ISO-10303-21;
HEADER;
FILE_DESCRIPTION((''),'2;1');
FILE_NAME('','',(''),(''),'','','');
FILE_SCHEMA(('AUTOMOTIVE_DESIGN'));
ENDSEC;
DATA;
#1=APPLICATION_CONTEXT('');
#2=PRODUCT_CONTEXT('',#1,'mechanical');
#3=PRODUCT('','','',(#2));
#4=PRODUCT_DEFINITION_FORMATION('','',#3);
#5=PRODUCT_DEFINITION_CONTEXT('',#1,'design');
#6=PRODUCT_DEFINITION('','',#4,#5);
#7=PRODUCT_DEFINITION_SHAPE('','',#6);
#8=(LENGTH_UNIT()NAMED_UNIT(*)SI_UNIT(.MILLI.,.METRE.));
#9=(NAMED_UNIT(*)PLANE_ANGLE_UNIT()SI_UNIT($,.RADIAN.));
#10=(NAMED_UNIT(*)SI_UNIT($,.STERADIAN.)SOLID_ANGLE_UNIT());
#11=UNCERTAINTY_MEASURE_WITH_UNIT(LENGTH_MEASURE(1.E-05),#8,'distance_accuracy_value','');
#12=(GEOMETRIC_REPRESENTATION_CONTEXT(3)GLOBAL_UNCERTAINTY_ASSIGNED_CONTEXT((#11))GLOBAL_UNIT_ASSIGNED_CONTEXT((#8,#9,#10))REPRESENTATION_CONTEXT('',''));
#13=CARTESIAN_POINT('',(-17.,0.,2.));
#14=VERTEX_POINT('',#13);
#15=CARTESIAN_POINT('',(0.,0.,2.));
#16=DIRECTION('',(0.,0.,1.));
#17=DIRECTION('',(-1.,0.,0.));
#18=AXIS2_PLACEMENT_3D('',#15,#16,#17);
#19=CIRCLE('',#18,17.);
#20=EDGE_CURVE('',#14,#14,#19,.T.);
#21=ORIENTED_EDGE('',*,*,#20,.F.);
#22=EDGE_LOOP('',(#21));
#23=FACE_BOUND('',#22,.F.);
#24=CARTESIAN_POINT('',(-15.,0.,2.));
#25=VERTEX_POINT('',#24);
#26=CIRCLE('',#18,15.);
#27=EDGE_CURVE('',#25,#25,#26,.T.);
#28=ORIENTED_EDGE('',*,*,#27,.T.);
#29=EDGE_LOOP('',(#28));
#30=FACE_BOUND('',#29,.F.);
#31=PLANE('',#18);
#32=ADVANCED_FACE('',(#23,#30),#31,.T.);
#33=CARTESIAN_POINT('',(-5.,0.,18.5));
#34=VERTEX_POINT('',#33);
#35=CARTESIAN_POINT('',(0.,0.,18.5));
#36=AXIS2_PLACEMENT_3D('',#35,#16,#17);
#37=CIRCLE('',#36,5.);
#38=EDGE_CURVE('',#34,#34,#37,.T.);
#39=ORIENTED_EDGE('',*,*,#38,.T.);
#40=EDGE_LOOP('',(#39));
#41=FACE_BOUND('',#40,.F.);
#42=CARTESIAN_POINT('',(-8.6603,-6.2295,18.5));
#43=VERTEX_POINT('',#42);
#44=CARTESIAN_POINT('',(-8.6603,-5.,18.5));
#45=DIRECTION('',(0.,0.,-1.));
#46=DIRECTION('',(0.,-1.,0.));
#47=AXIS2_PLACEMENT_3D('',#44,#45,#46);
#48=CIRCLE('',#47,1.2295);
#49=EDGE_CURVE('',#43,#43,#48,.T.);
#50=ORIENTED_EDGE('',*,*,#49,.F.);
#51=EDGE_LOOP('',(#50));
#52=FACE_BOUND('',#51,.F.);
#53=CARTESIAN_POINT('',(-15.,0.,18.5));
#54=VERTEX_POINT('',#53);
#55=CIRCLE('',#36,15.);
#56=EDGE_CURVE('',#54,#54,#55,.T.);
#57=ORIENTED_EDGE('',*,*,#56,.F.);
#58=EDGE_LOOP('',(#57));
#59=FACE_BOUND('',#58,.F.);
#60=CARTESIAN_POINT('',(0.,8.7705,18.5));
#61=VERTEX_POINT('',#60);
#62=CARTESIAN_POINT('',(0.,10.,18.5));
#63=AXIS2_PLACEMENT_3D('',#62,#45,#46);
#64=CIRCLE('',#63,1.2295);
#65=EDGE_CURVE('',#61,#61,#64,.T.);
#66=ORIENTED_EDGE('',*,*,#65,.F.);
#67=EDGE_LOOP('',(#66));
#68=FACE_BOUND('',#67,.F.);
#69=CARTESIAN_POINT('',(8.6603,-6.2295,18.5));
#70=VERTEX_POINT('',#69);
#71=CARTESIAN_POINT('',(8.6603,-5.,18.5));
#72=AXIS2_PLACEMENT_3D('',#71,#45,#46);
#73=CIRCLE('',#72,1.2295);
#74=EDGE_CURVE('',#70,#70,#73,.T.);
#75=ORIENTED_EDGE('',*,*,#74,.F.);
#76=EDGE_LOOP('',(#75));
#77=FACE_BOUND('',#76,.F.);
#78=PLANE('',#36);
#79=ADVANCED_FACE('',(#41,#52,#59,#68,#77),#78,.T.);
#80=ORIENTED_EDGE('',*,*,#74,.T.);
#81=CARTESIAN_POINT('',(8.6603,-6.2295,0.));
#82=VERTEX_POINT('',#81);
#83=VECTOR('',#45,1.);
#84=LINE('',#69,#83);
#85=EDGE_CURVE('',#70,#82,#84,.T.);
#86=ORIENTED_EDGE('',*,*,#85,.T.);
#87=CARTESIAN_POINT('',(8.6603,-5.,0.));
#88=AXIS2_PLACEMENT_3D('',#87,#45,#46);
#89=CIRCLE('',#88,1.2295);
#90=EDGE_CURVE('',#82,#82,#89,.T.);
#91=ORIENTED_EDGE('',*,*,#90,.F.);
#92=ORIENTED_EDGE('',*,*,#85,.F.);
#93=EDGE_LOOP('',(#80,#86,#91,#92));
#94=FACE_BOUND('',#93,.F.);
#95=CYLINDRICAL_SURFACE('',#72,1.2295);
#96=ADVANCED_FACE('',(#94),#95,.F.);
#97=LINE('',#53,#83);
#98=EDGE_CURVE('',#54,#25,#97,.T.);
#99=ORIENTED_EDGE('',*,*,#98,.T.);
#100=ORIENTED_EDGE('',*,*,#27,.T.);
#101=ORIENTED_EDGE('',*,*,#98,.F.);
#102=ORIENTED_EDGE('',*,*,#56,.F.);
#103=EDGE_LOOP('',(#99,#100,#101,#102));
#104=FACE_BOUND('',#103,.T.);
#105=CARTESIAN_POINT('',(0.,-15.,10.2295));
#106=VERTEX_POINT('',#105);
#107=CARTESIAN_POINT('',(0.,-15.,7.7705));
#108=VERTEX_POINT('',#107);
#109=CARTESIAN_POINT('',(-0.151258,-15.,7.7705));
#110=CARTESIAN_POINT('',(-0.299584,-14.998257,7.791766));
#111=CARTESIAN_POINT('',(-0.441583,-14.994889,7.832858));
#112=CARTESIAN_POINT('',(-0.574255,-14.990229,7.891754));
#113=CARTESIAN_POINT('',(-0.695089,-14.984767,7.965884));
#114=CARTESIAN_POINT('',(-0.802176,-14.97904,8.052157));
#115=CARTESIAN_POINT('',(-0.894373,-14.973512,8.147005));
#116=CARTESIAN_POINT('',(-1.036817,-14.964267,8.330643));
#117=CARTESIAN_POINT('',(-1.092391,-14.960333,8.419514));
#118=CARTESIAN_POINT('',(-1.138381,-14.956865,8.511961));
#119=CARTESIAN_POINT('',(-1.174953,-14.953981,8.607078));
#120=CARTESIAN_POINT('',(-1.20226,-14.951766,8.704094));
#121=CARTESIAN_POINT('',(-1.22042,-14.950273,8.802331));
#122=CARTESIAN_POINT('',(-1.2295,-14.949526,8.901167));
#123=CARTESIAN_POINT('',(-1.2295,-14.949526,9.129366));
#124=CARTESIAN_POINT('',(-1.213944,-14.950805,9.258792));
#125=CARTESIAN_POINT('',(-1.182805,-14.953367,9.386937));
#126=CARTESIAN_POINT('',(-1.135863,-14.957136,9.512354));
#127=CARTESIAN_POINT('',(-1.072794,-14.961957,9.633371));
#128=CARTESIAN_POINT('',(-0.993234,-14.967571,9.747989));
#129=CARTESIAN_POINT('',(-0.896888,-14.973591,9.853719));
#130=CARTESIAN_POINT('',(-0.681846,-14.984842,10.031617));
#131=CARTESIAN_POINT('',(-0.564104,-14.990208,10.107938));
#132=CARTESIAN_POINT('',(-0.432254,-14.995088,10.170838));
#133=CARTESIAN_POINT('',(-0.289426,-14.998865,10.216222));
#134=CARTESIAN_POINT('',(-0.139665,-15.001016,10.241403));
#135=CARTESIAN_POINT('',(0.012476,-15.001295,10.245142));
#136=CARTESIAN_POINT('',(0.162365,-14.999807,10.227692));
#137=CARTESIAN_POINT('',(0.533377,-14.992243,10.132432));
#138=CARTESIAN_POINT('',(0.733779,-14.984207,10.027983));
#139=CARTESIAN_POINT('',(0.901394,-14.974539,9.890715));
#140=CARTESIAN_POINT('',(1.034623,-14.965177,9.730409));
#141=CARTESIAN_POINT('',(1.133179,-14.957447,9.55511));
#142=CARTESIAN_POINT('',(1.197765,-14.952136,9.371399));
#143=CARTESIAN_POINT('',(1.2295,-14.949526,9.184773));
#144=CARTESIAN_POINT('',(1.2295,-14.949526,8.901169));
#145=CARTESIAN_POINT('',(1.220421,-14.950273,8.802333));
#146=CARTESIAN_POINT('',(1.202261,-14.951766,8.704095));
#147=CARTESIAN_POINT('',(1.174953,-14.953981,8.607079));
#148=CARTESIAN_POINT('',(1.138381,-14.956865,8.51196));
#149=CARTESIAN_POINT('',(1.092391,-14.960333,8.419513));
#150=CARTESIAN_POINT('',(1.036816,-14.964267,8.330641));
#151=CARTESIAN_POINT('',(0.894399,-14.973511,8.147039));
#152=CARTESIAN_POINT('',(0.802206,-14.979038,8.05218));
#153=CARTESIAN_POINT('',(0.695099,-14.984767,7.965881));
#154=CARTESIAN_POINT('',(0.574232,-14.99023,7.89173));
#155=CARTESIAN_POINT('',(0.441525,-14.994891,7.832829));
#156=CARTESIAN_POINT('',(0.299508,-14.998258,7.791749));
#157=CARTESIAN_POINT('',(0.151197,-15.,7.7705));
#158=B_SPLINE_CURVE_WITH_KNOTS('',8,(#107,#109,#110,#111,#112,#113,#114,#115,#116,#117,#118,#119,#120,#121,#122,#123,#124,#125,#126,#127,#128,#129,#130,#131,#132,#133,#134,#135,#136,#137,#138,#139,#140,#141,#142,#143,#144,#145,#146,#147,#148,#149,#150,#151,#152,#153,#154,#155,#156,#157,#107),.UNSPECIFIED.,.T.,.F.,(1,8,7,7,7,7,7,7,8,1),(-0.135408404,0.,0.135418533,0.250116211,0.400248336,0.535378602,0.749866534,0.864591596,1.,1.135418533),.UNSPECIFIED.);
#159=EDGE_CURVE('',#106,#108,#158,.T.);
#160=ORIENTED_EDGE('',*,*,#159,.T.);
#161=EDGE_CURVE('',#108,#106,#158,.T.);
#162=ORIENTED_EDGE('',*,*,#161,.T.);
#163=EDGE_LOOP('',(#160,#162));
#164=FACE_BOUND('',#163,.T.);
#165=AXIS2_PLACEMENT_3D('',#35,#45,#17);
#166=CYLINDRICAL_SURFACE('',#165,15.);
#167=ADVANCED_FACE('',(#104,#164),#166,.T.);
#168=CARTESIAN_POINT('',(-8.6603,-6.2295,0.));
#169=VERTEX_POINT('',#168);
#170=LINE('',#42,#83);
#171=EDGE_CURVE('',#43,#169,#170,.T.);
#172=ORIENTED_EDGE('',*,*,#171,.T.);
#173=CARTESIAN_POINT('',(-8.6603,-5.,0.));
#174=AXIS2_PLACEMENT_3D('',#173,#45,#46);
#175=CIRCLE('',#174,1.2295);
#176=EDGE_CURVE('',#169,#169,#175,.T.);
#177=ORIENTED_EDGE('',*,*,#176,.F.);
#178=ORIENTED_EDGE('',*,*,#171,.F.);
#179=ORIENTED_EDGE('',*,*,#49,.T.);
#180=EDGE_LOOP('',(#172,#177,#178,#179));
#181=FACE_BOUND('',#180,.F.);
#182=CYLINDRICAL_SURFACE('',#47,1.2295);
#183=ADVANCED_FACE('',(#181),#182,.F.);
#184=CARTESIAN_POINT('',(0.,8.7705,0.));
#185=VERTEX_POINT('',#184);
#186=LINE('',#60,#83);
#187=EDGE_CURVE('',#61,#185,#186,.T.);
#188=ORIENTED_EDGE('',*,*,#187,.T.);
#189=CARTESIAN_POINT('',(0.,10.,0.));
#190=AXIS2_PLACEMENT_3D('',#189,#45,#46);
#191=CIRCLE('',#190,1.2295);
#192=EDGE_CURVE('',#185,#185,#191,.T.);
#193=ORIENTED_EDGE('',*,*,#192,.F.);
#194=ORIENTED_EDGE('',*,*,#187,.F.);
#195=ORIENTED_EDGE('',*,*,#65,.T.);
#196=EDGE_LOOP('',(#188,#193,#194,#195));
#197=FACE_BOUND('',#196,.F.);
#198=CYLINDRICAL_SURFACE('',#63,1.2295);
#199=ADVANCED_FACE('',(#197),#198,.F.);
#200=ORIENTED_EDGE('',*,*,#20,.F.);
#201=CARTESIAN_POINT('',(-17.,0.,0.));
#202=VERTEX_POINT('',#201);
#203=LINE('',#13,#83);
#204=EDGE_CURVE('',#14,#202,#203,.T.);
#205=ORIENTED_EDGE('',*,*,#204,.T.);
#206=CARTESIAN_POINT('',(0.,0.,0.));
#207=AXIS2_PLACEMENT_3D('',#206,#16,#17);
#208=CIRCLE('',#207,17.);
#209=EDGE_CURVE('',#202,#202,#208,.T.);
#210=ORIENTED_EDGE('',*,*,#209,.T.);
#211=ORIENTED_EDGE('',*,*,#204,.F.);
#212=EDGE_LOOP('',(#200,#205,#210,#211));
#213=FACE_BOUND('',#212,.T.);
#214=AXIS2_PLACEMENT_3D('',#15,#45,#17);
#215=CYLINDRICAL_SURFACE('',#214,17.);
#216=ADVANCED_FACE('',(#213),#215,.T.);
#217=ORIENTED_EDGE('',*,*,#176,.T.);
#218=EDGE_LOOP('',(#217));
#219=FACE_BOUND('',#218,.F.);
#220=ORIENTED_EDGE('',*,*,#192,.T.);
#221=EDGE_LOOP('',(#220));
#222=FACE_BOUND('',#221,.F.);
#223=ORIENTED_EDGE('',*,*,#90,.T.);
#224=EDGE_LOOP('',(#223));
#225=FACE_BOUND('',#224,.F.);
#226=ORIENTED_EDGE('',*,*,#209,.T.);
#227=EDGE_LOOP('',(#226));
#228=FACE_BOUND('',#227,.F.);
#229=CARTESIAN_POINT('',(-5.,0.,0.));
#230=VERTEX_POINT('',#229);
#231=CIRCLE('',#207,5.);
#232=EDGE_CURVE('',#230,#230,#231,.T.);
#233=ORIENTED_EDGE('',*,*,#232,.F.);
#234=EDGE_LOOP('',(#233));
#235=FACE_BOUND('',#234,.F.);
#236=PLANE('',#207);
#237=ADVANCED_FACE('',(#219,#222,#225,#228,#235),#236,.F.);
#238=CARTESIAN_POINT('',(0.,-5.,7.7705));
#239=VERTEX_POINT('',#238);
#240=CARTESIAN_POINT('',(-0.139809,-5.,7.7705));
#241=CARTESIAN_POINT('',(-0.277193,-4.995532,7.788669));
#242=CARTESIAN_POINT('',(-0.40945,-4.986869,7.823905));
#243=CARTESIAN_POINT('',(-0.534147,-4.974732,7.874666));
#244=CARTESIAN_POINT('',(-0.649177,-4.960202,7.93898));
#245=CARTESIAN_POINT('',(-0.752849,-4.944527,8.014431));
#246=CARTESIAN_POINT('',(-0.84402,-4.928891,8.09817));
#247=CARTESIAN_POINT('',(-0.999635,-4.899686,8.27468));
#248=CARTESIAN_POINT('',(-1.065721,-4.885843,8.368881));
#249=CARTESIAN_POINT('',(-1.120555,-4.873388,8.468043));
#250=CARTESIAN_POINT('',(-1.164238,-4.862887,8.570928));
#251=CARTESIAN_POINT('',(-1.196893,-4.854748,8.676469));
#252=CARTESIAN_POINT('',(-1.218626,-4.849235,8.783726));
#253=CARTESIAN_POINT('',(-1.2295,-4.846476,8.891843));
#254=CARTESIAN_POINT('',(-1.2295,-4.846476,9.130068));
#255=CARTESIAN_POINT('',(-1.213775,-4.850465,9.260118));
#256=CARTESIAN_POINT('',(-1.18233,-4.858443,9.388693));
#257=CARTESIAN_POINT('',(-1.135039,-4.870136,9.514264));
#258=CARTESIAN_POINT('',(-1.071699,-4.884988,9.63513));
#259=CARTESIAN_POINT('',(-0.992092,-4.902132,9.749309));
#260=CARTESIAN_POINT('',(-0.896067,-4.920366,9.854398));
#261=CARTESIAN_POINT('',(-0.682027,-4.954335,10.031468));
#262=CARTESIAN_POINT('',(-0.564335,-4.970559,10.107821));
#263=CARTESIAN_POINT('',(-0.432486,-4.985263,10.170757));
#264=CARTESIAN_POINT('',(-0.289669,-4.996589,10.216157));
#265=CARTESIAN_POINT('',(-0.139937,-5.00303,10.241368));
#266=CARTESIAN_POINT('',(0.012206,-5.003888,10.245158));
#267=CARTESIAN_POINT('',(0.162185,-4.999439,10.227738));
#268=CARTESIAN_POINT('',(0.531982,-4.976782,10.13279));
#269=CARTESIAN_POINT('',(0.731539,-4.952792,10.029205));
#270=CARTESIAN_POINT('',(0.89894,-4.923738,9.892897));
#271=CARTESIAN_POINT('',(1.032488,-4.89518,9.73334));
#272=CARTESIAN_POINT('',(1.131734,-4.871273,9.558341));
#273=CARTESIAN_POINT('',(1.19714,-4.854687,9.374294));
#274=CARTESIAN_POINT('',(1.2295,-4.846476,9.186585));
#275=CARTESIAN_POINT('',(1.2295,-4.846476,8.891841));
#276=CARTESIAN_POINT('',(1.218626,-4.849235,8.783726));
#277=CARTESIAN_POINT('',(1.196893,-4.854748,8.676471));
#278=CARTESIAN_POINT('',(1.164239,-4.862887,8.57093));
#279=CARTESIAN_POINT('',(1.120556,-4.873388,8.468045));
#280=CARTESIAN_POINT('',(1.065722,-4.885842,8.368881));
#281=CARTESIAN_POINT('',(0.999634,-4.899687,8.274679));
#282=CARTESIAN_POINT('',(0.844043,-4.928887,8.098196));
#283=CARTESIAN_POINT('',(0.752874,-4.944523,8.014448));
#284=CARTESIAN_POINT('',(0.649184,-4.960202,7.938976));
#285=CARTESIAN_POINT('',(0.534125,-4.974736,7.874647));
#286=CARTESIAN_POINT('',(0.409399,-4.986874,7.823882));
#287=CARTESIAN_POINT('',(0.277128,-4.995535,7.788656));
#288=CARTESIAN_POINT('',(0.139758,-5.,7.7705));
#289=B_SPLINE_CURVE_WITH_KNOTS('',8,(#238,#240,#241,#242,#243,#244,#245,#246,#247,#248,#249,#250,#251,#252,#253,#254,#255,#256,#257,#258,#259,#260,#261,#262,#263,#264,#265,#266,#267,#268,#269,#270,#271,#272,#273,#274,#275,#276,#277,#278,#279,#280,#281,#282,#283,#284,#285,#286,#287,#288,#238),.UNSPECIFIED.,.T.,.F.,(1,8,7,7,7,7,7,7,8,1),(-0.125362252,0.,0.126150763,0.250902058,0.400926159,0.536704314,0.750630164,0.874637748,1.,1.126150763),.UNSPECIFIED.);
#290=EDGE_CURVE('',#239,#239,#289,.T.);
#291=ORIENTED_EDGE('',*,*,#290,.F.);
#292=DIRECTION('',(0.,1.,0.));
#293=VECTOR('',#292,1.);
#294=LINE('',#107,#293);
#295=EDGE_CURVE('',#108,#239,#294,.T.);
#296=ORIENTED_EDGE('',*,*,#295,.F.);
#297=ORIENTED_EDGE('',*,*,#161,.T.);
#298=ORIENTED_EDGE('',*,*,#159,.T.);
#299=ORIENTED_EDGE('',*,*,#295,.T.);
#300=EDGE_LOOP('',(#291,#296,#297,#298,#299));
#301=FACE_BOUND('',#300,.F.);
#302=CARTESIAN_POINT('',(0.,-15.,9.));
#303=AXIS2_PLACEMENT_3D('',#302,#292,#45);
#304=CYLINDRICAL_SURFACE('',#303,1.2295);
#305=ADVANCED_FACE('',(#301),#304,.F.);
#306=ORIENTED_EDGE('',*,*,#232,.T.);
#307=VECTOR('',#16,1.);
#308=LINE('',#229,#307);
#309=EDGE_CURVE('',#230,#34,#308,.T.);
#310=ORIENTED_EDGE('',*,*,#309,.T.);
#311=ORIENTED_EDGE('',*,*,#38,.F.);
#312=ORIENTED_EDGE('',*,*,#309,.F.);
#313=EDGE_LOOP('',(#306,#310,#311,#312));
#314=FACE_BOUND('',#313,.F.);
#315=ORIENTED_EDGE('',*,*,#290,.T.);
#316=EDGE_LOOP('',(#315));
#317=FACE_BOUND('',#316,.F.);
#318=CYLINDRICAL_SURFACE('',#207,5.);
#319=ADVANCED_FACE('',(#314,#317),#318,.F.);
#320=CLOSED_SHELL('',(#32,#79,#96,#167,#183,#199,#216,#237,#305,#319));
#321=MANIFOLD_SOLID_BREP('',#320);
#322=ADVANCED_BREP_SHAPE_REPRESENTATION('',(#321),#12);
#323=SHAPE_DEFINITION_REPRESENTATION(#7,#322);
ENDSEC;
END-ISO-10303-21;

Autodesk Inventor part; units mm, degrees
ref_plane "YZ Plane" through (0, 0, 0) normal (1, 0, 0) x (0, 1, 0)
ref_plane "XY Plane" through (0, 0, 0) normal (0, 0, 1) x (1, 0, 0)
sketch "Sketch1" plane through (0, 0, 0) normal (0, 1, 0) x (-1, 0, 0)
  line L0 (0, 0) -> (0, 34.0434)
  line L1 (5, 0) -> (5, 18.5)
  line L2 (5, 18.5) -> (15, 18.5)
  line L3 (15, 18.5) -> (15, 2)
  line L4 (15, 2) -> (17, 2)
  line L5 (17, 2) -> (17, 0)
  line L6 (17, 0) -> (5, 0)
  dimension "d0" = 10
  dimension "d1" = 2
  dimension "d2" = 2
  dimension "d3" = 30
  dimension "d4" = 16.5
revolve "Revolution1" add sketch "Sketch1" angle 360 about axis through (0, 0, 0) along (0, 0, 1)
sketch "Sketch2" plane through (0, 0, 18.5) normal (0, 0, 1) x (1, 0, 0)
  circle A0 centre (0, 0) radius 5 projected
  circle A1 centre (0, 0) radius 15 projected
  circle A2 centre (0, 0) radius 5 projected
  line L0 (0, 5) -> (0, 15)
  point P0 (0, 10)
  point P1 (0, 10)
  point P2 (-8.6603, -5)
  point P3 (8.6603, -5)
  dimension "d8" = 360
hole "Hole1" at (0, 10, 18.5) at (-8.6603, -5, 18.5) at (8.6603, -5, 18.5) direction (0, 0, -1) diameter 2.459 end through all thread size "M3x0.5" class "6H" standard "ISO Metric profile"
ref_plane "Work Plane2" through (0, -15, 10.25) normal (0, 1, 0) x (-1, 0, 0)
sketch "Sketch3" plane through (0, -15, 10.25) normal (0, 1, 0) x (-1, 0, 0)
  line L0 (17, -10.25) -> (-17, -10.25) projected
  point P0 (0, -10.25)
  point P1 (0, -1.25)
  point P2 (0, -10.25)
  dimension "d17" = 9
hole "Hole2" at (0, -15, 9) direction (0, 1, 0) diameter 2.459 depth 12 tip angle 118 thread size "M3x0.5" class "6H" standard "ISO Metric profile"
properties part number "ReelMotorBearingShaft" material "Aluminum 6061"
